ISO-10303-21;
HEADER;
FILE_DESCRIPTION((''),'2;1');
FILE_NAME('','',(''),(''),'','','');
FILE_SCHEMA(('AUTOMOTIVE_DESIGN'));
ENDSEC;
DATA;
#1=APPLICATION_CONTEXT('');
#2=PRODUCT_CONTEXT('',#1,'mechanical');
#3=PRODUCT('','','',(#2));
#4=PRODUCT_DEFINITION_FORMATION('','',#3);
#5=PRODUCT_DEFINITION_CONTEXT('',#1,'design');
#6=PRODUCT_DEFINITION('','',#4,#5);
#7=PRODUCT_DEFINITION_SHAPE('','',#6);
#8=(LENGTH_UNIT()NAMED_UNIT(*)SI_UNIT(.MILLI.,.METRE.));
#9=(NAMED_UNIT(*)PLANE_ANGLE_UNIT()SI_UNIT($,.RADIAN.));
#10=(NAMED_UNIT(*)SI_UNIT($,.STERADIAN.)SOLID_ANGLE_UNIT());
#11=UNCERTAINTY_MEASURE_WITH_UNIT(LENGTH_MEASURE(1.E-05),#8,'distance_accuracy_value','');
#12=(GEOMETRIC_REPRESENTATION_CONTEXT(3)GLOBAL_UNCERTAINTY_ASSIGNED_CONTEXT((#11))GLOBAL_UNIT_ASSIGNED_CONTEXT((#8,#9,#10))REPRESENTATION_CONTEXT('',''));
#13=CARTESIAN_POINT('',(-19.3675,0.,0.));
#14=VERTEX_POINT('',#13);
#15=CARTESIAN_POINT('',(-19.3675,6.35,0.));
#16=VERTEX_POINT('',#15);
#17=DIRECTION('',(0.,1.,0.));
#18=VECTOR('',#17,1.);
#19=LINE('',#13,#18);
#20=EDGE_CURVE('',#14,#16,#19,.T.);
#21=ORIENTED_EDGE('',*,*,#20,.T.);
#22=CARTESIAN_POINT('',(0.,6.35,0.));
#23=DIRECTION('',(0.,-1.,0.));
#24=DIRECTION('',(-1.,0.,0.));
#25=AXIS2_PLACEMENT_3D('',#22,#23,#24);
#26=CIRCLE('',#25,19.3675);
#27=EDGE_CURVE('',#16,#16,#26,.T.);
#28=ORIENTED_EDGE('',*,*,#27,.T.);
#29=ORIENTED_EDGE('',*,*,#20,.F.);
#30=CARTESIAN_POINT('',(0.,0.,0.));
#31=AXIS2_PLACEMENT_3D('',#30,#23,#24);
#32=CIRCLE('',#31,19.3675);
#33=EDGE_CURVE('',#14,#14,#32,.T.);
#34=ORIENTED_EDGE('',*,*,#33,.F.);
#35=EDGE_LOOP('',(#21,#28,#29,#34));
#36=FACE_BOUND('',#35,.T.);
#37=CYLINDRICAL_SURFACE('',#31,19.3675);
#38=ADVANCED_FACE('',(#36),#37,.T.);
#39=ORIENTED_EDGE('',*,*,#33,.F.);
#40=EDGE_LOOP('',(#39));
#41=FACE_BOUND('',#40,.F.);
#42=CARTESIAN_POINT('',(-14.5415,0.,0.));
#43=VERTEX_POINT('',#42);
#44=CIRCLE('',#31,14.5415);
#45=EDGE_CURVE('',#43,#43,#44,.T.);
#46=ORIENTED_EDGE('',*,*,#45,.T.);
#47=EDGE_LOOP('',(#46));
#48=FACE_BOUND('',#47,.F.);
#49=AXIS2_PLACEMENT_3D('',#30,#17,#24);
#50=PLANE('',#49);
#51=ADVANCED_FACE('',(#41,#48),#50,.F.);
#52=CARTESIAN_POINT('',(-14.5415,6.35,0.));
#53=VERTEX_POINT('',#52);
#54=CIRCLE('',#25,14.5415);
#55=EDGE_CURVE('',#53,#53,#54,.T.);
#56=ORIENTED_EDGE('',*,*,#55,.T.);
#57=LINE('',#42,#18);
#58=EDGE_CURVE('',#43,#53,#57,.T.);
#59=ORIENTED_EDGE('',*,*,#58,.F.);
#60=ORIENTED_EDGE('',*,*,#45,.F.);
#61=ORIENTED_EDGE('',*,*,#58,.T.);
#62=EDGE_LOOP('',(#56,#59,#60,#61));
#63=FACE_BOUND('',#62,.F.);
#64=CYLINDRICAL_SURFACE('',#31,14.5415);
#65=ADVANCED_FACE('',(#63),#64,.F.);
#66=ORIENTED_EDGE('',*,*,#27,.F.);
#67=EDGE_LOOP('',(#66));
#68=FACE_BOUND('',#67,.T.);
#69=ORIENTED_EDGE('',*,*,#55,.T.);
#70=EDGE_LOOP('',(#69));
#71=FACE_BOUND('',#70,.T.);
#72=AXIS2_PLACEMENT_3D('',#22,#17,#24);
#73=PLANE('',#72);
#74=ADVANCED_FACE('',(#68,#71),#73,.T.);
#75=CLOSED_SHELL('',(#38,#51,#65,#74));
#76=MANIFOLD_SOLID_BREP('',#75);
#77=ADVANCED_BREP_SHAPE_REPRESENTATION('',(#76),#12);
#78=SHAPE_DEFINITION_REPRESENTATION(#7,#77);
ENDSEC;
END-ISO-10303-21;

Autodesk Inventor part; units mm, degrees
ref_plane "YZ Plane" through (0, 0, 0) normal (1, 0, 0) x (0, 1, 0)
ref_plane "XZ Plane" through (0, 0, 0) normal (0, 1, 0) x (-1, 0, 0)
ref_plane "XY Plane" through (0, 0, 0) normal (0, 0, 1) x (1, 0, 0)
sketch "Sketch1" plane through (0, 0, 0) normal (0, 1, 0) x (-1, 0, 0)
  circle A0 centre (0, 0) radius 14.2875
  circle A1 centre (0, 0) radius 19.3675
  dimension "d0" = 28.575
  dimension "d1" = 5.08
extrude "Extrusion1" add sketch "Sketch1" along normal blind 6.35
offset faces "Size1" outward -0.254 faces at (-14.2412, 4.2333, -1.1497)
properties part number "Bearing Press Fit Test -0.01"
